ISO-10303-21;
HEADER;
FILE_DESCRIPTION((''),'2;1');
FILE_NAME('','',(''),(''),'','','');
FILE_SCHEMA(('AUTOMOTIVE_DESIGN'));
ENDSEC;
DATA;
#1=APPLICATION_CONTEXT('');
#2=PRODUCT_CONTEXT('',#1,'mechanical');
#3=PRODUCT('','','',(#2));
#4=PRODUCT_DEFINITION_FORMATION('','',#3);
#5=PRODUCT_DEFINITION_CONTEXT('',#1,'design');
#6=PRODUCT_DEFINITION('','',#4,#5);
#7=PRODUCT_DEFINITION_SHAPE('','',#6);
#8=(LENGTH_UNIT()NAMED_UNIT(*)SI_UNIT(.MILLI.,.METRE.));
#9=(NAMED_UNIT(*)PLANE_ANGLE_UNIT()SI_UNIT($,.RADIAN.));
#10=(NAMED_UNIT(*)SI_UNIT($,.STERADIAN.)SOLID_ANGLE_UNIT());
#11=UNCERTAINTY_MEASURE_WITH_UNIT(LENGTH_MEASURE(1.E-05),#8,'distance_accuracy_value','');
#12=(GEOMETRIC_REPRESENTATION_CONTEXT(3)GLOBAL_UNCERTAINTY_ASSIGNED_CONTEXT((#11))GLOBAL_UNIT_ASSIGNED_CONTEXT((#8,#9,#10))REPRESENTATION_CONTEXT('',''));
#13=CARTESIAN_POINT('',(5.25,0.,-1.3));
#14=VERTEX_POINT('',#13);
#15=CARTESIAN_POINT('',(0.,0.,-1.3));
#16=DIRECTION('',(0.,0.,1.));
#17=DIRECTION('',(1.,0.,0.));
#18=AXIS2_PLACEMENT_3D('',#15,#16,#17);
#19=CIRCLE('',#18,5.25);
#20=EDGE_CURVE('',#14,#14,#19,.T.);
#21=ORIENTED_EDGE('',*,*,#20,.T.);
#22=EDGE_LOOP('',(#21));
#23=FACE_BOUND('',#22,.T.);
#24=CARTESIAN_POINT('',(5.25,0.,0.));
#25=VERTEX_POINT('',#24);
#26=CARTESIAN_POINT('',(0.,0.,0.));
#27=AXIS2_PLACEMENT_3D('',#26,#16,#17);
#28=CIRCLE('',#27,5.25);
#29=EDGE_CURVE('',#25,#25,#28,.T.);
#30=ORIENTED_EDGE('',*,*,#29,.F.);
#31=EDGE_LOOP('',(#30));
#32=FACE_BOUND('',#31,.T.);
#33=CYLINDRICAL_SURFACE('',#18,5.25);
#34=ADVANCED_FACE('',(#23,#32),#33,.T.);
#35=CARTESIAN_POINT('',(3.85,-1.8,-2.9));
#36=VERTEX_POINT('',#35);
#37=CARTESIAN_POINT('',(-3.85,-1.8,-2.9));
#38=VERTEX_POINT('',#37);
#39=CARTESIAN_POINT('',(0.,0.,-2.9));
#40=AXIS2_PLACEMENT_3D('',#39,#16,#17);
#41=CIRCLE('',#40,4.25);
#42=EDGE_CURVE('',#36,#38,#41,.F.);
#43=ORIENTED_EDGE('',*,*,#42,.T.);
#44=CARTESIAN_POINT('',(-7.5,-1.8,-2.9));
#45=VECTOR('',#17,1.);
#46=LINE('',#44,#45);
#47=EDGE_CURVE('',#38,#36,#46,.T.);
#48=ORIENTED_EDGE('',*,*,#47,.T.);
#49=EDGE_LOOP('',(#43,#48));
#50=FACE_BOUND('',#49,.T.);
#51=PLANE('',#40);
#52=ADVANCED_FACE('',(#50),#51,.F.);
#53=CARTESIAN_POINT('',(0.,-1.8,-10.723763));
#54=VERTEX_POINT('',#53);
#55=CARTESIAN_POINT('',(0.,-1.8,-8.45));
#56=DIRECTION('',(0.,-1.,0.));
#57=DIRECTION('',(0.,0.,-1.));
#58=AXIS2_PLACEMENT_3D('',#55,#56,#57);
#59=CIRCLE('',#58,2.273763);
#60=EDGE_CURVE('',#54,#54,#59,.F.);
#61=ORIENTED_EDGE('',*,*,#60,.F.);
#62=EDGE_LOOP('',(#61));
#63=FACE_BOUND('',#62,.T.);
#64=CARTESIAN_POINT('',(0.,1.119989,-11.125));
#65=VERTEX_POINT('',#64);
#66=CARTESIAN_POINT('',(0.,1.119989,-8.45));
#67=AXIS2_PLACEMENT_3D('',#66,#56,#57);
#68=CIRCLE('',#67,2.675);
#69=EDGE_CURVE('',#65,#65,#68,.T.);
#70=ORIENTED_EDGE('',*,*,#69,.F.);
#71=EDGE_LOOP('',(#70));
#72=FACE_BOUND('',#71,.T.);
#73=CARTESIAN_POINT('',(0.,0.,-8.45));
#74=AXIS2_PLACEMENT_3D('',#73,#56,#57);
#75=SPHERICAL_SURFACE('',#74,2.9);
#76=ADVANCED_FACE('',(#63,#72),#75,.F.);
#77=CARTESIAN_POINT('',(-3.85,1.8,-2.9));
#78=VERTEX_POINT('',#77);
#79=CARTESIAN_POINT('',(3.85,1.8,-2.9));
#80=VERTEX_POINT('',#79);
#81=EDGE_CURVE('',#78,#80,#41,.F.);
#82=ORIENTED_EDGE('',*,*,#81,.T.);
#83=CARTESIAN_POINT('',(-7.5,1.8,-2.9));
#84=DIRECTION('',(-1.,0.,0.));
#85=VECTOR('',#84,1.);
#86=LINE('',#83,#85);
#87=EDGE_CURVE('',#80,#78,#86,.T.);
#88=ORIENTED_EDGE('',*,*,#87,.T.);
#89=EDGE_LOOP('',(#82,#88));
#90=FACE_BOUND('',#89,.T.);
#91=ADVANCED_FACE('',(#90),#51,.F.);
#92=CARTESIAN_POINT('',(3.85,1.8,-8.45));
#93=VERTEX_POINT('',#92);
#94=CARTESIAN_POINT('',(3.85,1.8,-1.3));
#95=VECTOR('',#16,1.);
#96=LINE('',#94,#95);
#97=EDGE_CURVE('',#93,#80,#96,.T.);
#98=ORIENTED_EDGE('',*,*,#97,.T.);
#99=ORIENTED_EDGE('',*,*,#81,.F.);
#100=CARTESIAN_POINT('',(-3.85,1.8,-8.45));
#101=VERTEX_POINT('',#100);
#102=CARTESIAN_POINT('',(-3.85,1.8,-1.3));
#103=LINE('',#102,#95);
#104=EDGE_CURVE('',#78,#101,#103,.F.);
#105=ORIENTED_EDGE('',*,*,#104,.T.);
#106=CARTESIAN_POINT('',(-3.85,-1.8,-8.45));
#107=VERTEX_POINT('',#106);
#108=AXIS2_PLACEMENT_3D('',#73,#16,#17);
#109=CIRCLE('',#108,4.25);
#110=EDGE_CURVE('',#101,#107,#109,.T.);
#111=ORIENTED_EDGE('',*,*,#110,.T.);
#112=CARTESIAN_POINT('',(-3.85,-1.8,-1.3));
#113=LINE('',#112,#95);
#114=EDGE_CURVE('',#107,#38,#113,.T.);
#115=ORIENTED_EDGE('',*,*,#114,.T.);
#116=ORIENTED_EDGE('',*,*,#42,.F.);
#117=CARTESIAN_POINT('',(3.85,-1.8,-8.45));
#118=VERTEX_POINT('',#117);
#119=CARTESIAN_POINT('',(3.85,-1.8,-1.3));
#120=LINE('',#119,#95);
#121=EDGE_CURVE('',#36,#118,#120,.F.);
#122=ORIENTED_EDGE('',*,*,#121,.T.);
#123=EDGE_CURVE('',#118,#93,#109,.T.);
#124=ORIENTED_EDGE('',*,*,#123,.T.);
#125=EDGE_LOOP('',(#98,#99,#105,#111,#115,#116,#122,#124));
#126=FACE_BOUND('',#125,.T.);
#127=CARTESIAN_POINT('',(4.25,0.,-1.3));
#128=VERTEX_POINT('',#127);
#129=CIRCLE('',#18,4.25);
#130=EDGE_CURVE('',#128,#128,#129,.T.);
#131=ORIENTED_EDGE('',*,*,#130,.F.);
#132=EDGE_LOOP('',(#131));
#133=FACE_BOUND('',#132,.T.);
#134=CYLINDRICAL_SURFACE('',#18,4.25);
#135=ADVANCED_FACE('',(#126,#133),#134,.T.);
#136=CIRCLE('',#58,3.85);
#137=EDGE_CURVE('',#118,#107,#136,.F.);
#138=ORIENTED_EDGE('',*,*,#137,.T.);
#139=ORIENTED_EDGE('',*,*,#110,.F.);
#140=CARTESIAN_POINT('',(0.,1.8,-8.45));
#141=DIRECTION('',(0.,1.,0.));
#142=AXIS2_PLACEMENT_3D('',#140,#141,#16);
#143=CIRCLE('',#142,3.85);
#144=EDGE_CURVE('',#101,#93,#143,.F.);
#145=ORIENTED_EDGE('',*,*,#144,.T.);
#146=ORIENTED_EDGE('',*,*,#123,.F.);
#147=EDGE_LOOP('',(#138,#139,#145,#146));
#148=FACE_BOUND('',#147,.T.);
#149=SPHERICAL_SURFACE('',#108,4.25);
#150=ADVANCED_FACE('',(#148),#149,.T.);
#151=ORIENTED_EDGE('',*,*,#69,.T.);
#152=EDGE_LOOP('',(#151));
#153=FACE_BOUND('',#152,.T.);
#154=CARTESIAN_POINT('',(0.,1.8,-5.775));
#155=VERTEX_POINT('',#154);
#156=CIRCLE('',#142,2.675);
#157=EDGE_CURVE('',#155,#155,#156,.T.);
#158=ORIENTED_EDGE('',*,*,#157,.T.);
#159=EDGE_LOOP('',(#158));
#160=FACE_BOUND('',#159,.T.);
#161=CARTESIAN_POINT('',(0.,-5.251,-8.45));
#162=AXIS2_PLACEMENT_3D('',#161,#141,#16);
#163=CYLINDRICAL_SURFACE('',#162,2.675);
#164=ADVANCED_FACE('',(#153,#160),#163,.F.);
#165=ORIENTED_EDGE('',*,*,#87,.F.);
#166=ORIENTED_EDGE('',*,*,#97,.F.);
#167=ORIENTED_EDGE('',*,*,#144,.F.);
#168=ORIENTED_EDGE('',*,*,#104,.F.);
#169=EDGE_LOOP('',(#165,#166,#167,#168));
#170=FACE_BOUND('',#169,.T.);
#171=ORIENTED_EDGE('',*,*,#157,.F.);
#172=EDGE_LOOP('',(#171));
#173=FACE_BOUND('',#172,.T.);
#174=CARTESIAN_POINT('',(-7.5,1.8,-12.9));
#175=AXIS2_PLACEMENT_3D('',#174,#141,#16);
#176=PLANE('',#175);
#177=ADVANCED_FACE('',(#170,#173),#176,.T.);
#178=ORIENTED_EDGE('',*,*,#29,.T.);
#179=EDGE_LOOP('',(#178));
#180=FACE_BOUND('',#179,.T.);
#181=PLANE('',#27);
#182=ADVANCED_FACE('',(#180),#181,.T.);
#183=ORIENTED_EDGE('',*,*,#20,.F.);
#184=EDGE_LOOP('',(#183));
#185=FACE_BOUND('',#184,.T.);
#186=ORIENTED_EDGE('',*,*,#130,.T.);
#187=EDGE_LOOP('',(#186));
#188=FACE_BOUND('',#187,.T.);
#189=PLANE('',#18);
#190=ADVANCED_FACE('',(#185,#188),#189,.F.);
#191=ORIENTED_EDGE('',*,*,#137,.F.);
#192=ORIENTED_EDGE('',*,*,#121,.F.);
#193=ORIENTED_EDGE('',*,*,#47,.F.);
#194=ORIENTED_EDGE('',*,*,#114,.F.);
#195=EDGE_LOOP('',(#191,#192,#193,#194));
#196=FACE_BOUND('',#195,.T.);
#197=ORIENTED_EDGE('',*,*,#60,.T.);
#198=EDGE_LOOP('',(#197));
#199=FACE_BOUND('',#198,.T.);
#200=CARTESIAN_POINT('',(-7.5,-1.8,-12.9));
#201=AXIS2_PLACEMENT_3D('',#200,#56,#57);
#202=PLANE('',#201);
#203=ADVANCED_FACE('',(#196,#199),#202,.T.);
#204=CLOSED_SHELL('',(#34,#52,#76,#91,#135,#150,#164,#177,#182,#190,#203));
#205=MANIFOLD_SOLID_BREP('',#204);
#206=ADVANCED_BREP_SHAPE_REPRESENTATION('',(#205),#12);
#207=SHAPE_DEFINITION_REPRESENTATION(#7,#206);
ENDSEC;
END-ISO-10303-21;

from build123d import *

# Parameters (mm, degrees)
CUT_EXTRUDE_START    = -2.9
SKETCH_2_OUTSIDE_W   = 16.408
SKETCH_2_OUTSIDE_H   = 16.408
SKETCH_2_OUTSIDE_W_2 = 15
SKETCH_2_OUTSIDE_H_2 = 3.6
CUT_EXTRUDE_1_DEPTH  = 10
CUT_EXTRUDE_2_REACH  = 17.445
SKETCH_3_R           = 2.675


with BuildPart() as part:
    # Эскиз1 → Повернуть1 (revolve)
    with BuildSketch(Plane(origin=(0, 0, 0), x_dir=(1, 0, 0), z_dir=(0, 1, 0))):
        with BuildLine():
            Line((0, 0), (5.25, 0))
            Line((5.25, 0), (5.25, 1.3))
            Line((5.25, 1.3), (4.25, 1.3))
            Line((4.25, 1.3), (4.25, 8.45))
            ThreePointArc((4.25, 8.45), (3.00520382, 11.45520382), (0, 12.7))
            Line((0, 12.7), (0, 11.35))
            ThreePointArc((0, 11.35), (2.9, 8.45), (0, 5.55))
            Line((0, 5.55), (0, 0))
        make_face()
    revolve(axis=Axis((0, 0, -1.3), (0, 0, -1)))

    # Эскиз2 outside → Вырез-Вытянуть1 (cut)
    with BuildSketch(Plane.XY.offset(CUT_EXTRUDE_START)):
        Rectangle(SKETCH_2_OUTSIDE_W, SKETCH_2_OUTSIDE_H)
        Rectangle(SKETCH_2_OUTSIDE_W_2, SKETCH_2_OUTSIDE_H_2, mode=Mode.SUBTRACT)
    extrude(amount=-CUT_EXTRUDE_1_DEPTH, mode=Mode.SUBTRACT)

    # Эскиз3 → Вырез-Вытянуть2 (cut, up to next)
    with BuildSketch(Plane(origin=(0, 1.8, 0), x_dir=(1, 0, 0), z_dir=(0, 1, 0)), mode=Mode.PRIVATE) as cut_extrude_2_sk1:
        with Locations((0, 8.45)):
            Circle(SKETCH_3_R)
    cut_extrude_2_tool1 = extrude(cut_extrude_2_sk1.sketch, amount=-CUT_EXTRUDE_2_REACH, mode=Mode.PRIVATE) & part.part
    add(cut_extrude_2_tool1.solids().sort_by_distance((0, 1.8, -8.45))[0], mode=Mode.SUBTRACT)


solid = part.part
